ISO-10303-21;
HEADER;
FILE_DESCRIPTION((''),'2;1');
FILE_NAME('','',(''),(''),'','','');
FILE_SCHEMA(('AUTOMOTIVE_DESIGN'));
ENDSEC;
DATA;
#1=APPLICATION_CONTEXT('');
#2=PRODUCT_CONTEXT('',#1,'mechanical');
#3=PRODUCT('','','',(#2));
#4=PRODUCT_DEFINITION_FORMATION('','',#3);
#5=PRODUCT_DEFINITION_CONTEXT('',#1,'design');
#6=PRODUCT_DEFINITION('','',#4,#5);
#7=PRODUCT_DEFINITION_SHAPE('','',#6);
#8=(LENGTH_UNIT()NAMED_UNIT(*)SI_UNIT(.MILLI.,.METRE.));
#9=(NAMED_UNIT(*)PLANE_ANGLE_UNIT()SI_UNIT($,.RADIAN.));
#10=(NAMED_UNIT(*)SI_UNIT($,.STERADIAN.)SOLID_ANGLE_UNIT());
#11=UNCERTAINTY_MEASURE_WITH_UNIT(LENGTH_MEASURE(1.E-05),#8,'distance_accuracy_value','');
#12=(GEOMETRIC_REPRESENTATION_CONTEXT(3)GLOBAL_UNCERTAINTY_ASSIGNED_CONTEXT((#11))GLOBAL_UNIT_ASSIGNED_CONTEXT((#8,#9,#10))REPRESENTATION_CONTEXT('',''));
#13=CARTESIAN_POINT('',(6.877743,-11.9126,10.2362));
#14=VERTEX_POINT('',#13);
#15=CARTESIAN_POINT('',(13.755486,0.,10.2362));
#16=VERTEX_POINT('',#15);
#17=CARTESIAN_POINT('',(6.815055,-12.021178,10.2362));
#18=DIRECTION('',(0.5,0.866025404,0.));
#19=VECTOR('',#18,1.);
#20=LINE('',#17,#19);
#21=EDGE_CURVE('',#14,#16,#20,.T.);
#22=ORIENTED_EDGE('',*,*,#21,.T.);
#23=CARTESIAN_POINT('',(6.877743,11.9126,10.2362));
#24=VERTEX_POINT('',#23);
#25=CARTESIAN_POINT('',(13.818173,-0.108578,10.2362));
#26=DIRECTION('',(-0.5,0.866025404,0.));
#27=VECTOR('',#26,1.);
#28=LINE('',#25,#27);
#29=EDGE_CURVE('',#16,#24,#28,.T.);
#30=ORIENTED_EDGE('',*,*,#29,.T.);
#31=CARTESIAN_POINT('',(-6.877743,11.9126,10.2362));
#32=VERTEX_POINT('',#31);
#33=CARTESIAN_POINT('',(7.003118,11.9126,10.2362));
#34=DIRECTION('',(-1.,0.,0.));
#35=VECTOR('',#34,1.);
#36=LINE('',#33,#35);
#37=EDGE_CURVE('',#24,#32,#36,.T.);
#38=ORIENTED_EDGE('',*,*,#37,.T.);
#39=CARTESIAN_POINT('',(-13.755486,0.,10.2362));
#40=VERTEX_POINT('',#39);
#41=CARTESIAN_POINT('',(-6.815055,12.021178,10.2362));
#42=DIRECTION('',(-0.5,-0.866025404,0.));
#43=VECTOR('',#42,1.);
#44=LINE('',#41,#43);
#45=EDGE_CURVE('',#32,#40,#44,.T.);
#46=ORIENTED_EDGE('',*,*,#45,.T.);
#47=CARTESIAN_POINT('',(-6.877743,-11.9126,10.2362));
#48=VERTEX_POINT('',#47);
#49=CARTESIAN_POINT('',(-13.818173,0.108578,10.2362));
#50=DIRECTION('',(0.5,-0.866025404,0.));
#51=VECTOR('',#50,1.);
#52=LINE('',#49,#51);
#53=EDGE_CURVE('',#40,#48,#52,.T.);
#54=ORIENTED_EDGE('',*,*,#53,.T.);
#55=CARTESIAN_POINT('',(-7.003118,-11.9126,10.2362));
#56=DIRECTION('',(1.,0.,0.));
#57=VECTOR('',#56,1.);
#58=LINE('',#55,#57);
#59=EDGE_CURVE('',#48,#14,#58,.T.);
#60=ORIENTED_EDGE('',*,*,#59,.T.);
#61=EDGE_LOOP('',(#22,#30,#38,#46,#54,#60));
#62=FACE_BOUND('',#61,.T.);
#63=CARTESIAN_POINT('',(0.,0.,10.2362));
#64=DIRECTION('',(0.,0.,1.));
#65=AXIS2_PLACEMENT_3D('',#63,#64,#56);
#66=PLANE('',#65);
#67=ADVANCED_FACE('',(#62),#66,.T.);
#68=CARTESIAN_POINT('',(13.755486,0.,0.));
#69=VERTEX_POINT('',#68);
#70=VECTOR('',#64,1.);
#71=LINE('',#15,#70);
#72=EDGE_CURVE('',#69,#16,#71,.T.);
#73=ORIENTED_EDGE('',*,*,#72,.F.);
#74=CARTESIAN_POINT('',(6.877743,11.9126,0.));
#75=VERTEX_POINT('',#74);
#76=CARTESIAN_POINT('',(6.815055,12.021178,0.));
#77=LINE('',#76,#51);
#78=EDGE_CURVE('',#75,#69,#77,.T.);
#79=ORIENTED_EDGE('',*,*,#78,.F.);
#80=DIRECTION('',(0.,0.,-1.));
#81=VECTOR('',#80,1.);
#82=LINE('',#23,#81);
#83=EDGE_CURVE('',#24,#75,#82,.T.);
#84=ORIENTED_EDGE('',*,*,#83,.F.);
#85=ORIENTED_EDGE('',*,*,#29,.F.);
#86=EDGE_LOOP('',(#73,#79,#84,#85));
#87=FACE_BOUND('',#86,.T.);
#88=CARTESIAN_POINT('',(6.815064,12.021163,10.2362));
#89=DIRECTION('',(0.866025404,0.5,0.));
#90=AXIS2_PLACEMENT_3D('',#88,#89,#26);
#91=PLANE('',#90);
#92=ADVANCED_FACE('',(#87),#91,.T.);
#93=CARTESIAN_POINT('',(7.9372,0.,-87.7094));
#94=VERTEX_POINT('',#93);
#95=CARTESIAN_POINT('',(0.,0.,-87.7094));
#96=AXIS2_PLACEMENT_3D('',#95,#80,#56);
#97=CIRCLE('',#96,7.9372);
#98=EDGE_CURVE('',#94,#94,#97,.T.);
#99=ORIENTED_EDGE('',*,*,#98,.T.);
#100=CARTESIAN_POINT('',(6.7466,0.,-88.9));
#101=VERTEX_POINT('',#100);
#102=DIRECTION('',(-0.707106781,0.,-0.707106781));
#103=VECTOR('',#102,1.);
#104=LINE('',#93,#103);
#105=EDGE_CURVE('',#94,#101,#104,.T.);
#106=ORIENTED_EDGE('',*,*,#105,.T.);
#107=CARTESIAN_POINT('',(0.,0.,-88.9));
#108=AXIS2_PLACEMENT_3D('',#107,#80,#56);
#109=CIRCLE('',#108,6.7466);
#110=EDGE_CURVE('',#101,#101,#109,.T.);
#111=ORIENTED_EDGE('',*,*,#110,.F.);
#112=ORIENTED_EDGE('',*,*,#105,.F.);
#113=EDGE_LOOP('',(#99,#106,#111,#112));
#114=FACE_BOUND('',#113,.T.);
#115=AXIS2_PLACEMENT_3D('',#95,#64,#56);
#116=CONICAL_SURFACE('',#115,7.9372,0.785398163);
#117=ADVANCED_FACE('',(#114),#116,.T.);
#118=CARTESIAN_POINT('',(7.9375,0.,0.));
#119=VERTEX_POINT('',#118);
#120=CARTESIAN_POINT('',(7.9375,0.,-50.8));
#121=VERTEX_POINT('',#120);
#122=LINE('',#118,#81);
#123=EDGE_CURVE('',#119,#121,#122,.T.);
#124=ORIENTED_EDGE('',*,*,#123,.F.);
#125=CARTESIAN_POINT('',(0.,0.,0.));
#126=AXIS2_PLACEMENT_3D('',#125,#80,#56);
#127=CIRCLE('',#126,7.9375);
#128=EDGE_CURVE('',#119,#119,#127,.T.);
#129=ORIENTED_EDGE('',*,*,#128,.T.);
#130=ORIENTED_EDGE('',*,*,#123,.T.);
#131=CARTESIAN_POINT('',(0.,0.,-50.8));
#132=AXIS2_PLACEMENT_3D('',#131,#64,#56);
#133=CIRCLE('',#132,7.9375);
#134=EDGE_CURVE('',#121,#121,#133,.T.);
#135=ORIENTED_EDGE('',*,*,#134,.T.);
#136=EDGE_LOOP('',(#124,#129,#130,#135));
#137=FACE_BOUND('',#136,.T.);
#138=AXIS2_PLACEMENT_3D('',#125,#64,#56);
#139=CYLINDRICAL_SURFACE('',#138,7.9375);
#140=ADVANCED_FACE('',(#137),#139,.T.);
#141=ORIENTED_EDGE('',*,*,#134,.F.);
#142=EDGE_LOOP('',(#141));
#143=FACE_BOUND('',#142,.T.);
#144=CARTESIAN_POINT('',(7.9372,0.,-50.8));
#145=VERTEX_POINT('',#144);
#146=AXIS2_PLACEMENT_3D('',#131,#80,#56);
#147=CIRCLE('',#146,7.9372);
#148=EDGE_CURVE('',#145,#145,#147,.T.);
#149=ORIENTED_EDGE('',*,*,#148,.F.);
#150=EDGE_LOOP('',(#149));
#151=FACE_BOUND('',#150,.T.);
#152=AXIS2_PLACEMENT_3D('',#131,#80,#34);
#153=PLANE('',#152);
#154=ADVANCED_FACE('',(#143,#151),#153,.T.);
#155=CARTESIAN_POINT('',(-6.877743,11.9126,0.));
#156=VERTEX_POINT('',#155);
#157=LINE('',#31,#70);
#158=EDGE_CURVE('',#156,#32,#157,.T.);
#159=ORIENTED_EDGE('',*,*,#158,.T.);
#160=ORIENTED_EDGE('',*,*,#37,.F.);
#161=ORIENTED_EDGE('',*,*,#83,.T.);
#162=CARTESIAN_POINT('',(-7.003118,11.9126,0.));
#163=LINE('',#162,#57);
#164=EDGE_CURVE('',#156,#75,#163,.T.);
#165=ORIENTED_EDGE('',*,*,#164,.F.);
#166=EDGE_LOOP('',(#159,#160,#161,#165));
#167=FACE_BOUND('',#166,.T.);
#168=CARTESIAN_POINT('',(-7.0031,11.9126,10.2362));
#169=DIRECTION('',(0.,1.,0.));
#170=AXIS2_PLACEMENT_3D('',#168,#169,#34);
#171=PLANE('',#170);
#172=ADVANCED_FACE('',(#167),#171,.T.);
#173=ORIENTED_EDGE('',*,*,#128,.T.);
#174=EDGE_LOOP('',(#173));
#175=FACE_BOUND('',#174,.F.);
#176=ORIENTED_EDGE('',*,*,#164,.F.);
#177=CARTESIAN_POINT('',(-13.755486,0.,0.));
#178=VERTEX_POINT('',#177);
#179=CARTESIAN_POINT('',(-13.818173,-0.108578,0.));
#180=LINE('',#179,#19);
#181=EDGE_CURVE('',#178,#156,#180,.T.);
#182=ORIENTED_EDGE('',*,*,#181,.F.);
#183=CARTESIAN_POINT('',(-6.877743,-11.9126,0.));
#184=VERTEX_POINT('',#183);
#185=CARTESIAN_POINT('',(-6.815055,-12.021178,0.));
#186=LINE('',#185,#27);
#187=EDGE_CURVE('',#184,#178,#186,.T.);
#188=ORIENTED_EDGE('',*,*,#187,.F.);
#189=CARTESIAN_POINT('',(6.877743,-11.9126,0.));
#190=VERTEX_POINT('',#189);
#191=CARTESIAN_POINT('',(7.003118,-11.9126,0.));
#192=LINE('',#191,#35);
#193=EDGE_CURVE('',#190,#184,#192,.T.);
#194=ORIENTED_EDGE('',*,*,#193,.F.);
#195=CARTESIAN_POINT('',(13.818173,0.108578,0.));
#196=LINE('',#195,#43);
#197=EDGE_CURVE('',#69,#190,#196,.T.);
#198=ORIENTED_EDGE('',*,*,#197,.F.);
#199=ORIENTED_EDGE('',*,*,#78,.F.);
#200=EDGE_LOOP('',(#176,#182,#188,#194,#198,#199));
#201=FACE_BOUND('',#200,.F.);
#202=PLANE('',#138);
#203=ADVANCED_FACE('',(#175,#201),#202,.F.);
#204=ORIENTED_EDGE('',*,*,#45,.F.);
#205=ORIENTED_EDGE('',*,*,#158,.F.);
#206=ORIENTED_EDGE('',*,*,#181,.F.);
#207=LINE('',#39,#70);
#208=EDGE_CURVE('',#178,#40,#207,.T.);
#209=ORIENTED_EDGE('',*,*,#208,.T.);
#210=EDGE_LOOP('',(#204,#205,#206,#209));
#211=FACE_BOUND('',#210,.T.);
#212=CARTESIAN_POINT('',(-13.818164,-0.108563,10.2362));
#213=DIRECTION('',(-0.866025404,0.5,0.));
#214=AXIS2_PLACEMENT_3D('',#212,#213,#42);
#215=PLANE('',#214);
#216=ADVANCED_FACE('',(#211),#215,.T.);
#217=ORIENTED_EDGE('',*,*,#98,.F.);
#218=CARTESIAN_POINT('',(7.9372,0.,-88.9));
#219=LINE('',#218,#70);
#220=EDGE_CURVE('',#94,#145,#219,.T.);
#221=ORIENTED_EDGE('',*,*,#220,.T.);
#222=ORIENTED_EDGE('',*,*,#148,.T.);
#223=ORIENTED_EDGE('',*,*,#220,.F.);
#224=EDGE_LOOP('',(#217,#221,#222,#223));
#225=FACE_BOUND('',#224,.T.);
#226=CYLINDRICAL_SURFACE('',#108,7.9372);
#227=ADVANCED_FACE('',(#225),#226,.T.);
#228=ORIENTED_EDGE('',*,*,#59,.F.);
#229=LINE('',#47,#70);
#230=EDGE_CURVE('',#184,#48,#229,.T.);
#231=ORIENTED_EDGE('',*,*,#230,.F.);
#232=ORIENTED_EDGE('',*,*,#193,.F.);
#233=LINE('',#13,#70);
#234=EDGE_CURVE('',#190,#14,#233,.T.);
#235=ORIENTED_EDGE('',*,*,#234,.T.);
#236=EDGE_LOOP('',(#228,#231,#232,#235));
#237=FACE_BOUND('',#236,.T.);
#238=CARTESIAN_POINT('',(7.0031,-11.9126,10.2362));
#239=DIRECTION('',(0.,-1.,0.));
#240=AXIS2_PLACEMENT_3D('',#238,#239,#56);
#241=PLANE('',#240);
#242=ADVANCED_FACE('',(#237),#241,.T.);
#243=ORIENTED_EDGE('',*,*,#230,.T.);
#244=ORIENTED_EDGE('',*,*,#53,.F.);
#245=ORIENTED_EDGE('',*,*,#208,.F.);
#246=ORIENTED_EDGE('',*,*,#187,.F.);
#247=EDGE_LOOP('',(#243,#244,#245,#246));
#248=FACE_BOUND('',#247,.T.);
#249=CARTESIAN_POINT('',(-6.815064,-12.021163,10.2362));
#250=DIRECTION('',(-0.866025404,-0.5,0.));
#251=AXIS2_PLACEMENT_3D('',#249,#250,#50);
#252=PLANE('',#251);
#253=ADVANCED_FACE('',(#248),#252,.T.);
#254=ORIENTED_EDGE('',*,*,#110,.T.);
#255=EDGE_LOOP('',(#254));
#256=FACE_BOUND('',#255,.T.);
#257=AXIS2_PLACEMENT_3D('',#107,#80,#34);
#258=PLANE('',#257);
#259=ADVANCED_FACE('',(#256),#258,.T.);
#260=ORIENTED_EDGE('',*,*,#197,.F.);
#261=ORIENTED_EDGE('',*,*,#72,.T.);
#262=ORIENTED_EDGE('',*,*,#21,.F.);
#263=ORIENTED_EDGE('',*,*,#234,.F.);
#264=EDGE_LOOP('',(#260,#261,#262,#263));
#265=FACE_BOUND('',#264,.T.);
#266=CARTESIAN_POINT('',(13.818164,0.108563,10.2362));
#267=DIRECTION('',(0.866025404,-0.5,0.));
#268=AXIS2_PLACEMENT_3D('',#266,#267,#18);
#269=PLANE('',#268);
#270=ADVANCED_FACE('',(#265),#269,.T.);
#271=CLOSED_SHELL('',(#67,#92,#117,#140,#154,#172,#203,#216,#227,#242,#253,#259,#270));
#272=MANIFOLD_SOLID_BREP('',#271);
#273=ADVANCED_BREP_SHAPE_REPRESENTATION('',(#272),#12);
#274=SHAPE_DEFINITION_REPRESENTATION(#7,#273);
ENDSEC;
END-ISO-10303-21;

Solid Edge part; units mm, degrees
sketch "Sketch1" plane through (0, 0, 0) normal (0, 0, 1) x (1, 0, 0)
  circle A0 centre (0, 0) radius 13.8186
  dimension "D1" = 27.6372
extrude "Protrusion1" add sketch "Sketch1" along normal blind 10.2362
sketch "Sketch2" plane through (0, 0, 0) normal (0, 0, -1) x (1, 0, 0)
  circle A0 centre (0, 0) radius 7.9375
extrude "Protrusion2" add sketch "Sketch2" along normal blind 88.9
sketch "Sketch3" plane through (0, 0, -88.9) normal (0, 0, -1) x (1, 0, 0)
  circle A0 centre (0, 0) radius 7.9372
extrude "Cutout1" cut sketch "Sketch3" against normal blind 38.1 flip side to cut
chamfer "Chamfer_1" distance 1.1906 angle 45 1 edges at (-7.9372, 0, -88.9)
sketch "Sketch4" plane through (0, 0, 10.2362) normal (0, 0, 1) x (1, 0, 0)
  line L0 (-7.0031, 11.9126) -> (7.0031, 11.9126)
  dimension "D1" = 23.8252
extrude "Cutout2" cut sketch "Sketch4" against normal up to next material side at (0, 11.9626, 10.2362)
pattern_circular "Pattern1" count 6 over 360 about axis through (0, 0, 10.2362) along (0, 0, 1) of "Cutout2"
properties part number "24100043"
